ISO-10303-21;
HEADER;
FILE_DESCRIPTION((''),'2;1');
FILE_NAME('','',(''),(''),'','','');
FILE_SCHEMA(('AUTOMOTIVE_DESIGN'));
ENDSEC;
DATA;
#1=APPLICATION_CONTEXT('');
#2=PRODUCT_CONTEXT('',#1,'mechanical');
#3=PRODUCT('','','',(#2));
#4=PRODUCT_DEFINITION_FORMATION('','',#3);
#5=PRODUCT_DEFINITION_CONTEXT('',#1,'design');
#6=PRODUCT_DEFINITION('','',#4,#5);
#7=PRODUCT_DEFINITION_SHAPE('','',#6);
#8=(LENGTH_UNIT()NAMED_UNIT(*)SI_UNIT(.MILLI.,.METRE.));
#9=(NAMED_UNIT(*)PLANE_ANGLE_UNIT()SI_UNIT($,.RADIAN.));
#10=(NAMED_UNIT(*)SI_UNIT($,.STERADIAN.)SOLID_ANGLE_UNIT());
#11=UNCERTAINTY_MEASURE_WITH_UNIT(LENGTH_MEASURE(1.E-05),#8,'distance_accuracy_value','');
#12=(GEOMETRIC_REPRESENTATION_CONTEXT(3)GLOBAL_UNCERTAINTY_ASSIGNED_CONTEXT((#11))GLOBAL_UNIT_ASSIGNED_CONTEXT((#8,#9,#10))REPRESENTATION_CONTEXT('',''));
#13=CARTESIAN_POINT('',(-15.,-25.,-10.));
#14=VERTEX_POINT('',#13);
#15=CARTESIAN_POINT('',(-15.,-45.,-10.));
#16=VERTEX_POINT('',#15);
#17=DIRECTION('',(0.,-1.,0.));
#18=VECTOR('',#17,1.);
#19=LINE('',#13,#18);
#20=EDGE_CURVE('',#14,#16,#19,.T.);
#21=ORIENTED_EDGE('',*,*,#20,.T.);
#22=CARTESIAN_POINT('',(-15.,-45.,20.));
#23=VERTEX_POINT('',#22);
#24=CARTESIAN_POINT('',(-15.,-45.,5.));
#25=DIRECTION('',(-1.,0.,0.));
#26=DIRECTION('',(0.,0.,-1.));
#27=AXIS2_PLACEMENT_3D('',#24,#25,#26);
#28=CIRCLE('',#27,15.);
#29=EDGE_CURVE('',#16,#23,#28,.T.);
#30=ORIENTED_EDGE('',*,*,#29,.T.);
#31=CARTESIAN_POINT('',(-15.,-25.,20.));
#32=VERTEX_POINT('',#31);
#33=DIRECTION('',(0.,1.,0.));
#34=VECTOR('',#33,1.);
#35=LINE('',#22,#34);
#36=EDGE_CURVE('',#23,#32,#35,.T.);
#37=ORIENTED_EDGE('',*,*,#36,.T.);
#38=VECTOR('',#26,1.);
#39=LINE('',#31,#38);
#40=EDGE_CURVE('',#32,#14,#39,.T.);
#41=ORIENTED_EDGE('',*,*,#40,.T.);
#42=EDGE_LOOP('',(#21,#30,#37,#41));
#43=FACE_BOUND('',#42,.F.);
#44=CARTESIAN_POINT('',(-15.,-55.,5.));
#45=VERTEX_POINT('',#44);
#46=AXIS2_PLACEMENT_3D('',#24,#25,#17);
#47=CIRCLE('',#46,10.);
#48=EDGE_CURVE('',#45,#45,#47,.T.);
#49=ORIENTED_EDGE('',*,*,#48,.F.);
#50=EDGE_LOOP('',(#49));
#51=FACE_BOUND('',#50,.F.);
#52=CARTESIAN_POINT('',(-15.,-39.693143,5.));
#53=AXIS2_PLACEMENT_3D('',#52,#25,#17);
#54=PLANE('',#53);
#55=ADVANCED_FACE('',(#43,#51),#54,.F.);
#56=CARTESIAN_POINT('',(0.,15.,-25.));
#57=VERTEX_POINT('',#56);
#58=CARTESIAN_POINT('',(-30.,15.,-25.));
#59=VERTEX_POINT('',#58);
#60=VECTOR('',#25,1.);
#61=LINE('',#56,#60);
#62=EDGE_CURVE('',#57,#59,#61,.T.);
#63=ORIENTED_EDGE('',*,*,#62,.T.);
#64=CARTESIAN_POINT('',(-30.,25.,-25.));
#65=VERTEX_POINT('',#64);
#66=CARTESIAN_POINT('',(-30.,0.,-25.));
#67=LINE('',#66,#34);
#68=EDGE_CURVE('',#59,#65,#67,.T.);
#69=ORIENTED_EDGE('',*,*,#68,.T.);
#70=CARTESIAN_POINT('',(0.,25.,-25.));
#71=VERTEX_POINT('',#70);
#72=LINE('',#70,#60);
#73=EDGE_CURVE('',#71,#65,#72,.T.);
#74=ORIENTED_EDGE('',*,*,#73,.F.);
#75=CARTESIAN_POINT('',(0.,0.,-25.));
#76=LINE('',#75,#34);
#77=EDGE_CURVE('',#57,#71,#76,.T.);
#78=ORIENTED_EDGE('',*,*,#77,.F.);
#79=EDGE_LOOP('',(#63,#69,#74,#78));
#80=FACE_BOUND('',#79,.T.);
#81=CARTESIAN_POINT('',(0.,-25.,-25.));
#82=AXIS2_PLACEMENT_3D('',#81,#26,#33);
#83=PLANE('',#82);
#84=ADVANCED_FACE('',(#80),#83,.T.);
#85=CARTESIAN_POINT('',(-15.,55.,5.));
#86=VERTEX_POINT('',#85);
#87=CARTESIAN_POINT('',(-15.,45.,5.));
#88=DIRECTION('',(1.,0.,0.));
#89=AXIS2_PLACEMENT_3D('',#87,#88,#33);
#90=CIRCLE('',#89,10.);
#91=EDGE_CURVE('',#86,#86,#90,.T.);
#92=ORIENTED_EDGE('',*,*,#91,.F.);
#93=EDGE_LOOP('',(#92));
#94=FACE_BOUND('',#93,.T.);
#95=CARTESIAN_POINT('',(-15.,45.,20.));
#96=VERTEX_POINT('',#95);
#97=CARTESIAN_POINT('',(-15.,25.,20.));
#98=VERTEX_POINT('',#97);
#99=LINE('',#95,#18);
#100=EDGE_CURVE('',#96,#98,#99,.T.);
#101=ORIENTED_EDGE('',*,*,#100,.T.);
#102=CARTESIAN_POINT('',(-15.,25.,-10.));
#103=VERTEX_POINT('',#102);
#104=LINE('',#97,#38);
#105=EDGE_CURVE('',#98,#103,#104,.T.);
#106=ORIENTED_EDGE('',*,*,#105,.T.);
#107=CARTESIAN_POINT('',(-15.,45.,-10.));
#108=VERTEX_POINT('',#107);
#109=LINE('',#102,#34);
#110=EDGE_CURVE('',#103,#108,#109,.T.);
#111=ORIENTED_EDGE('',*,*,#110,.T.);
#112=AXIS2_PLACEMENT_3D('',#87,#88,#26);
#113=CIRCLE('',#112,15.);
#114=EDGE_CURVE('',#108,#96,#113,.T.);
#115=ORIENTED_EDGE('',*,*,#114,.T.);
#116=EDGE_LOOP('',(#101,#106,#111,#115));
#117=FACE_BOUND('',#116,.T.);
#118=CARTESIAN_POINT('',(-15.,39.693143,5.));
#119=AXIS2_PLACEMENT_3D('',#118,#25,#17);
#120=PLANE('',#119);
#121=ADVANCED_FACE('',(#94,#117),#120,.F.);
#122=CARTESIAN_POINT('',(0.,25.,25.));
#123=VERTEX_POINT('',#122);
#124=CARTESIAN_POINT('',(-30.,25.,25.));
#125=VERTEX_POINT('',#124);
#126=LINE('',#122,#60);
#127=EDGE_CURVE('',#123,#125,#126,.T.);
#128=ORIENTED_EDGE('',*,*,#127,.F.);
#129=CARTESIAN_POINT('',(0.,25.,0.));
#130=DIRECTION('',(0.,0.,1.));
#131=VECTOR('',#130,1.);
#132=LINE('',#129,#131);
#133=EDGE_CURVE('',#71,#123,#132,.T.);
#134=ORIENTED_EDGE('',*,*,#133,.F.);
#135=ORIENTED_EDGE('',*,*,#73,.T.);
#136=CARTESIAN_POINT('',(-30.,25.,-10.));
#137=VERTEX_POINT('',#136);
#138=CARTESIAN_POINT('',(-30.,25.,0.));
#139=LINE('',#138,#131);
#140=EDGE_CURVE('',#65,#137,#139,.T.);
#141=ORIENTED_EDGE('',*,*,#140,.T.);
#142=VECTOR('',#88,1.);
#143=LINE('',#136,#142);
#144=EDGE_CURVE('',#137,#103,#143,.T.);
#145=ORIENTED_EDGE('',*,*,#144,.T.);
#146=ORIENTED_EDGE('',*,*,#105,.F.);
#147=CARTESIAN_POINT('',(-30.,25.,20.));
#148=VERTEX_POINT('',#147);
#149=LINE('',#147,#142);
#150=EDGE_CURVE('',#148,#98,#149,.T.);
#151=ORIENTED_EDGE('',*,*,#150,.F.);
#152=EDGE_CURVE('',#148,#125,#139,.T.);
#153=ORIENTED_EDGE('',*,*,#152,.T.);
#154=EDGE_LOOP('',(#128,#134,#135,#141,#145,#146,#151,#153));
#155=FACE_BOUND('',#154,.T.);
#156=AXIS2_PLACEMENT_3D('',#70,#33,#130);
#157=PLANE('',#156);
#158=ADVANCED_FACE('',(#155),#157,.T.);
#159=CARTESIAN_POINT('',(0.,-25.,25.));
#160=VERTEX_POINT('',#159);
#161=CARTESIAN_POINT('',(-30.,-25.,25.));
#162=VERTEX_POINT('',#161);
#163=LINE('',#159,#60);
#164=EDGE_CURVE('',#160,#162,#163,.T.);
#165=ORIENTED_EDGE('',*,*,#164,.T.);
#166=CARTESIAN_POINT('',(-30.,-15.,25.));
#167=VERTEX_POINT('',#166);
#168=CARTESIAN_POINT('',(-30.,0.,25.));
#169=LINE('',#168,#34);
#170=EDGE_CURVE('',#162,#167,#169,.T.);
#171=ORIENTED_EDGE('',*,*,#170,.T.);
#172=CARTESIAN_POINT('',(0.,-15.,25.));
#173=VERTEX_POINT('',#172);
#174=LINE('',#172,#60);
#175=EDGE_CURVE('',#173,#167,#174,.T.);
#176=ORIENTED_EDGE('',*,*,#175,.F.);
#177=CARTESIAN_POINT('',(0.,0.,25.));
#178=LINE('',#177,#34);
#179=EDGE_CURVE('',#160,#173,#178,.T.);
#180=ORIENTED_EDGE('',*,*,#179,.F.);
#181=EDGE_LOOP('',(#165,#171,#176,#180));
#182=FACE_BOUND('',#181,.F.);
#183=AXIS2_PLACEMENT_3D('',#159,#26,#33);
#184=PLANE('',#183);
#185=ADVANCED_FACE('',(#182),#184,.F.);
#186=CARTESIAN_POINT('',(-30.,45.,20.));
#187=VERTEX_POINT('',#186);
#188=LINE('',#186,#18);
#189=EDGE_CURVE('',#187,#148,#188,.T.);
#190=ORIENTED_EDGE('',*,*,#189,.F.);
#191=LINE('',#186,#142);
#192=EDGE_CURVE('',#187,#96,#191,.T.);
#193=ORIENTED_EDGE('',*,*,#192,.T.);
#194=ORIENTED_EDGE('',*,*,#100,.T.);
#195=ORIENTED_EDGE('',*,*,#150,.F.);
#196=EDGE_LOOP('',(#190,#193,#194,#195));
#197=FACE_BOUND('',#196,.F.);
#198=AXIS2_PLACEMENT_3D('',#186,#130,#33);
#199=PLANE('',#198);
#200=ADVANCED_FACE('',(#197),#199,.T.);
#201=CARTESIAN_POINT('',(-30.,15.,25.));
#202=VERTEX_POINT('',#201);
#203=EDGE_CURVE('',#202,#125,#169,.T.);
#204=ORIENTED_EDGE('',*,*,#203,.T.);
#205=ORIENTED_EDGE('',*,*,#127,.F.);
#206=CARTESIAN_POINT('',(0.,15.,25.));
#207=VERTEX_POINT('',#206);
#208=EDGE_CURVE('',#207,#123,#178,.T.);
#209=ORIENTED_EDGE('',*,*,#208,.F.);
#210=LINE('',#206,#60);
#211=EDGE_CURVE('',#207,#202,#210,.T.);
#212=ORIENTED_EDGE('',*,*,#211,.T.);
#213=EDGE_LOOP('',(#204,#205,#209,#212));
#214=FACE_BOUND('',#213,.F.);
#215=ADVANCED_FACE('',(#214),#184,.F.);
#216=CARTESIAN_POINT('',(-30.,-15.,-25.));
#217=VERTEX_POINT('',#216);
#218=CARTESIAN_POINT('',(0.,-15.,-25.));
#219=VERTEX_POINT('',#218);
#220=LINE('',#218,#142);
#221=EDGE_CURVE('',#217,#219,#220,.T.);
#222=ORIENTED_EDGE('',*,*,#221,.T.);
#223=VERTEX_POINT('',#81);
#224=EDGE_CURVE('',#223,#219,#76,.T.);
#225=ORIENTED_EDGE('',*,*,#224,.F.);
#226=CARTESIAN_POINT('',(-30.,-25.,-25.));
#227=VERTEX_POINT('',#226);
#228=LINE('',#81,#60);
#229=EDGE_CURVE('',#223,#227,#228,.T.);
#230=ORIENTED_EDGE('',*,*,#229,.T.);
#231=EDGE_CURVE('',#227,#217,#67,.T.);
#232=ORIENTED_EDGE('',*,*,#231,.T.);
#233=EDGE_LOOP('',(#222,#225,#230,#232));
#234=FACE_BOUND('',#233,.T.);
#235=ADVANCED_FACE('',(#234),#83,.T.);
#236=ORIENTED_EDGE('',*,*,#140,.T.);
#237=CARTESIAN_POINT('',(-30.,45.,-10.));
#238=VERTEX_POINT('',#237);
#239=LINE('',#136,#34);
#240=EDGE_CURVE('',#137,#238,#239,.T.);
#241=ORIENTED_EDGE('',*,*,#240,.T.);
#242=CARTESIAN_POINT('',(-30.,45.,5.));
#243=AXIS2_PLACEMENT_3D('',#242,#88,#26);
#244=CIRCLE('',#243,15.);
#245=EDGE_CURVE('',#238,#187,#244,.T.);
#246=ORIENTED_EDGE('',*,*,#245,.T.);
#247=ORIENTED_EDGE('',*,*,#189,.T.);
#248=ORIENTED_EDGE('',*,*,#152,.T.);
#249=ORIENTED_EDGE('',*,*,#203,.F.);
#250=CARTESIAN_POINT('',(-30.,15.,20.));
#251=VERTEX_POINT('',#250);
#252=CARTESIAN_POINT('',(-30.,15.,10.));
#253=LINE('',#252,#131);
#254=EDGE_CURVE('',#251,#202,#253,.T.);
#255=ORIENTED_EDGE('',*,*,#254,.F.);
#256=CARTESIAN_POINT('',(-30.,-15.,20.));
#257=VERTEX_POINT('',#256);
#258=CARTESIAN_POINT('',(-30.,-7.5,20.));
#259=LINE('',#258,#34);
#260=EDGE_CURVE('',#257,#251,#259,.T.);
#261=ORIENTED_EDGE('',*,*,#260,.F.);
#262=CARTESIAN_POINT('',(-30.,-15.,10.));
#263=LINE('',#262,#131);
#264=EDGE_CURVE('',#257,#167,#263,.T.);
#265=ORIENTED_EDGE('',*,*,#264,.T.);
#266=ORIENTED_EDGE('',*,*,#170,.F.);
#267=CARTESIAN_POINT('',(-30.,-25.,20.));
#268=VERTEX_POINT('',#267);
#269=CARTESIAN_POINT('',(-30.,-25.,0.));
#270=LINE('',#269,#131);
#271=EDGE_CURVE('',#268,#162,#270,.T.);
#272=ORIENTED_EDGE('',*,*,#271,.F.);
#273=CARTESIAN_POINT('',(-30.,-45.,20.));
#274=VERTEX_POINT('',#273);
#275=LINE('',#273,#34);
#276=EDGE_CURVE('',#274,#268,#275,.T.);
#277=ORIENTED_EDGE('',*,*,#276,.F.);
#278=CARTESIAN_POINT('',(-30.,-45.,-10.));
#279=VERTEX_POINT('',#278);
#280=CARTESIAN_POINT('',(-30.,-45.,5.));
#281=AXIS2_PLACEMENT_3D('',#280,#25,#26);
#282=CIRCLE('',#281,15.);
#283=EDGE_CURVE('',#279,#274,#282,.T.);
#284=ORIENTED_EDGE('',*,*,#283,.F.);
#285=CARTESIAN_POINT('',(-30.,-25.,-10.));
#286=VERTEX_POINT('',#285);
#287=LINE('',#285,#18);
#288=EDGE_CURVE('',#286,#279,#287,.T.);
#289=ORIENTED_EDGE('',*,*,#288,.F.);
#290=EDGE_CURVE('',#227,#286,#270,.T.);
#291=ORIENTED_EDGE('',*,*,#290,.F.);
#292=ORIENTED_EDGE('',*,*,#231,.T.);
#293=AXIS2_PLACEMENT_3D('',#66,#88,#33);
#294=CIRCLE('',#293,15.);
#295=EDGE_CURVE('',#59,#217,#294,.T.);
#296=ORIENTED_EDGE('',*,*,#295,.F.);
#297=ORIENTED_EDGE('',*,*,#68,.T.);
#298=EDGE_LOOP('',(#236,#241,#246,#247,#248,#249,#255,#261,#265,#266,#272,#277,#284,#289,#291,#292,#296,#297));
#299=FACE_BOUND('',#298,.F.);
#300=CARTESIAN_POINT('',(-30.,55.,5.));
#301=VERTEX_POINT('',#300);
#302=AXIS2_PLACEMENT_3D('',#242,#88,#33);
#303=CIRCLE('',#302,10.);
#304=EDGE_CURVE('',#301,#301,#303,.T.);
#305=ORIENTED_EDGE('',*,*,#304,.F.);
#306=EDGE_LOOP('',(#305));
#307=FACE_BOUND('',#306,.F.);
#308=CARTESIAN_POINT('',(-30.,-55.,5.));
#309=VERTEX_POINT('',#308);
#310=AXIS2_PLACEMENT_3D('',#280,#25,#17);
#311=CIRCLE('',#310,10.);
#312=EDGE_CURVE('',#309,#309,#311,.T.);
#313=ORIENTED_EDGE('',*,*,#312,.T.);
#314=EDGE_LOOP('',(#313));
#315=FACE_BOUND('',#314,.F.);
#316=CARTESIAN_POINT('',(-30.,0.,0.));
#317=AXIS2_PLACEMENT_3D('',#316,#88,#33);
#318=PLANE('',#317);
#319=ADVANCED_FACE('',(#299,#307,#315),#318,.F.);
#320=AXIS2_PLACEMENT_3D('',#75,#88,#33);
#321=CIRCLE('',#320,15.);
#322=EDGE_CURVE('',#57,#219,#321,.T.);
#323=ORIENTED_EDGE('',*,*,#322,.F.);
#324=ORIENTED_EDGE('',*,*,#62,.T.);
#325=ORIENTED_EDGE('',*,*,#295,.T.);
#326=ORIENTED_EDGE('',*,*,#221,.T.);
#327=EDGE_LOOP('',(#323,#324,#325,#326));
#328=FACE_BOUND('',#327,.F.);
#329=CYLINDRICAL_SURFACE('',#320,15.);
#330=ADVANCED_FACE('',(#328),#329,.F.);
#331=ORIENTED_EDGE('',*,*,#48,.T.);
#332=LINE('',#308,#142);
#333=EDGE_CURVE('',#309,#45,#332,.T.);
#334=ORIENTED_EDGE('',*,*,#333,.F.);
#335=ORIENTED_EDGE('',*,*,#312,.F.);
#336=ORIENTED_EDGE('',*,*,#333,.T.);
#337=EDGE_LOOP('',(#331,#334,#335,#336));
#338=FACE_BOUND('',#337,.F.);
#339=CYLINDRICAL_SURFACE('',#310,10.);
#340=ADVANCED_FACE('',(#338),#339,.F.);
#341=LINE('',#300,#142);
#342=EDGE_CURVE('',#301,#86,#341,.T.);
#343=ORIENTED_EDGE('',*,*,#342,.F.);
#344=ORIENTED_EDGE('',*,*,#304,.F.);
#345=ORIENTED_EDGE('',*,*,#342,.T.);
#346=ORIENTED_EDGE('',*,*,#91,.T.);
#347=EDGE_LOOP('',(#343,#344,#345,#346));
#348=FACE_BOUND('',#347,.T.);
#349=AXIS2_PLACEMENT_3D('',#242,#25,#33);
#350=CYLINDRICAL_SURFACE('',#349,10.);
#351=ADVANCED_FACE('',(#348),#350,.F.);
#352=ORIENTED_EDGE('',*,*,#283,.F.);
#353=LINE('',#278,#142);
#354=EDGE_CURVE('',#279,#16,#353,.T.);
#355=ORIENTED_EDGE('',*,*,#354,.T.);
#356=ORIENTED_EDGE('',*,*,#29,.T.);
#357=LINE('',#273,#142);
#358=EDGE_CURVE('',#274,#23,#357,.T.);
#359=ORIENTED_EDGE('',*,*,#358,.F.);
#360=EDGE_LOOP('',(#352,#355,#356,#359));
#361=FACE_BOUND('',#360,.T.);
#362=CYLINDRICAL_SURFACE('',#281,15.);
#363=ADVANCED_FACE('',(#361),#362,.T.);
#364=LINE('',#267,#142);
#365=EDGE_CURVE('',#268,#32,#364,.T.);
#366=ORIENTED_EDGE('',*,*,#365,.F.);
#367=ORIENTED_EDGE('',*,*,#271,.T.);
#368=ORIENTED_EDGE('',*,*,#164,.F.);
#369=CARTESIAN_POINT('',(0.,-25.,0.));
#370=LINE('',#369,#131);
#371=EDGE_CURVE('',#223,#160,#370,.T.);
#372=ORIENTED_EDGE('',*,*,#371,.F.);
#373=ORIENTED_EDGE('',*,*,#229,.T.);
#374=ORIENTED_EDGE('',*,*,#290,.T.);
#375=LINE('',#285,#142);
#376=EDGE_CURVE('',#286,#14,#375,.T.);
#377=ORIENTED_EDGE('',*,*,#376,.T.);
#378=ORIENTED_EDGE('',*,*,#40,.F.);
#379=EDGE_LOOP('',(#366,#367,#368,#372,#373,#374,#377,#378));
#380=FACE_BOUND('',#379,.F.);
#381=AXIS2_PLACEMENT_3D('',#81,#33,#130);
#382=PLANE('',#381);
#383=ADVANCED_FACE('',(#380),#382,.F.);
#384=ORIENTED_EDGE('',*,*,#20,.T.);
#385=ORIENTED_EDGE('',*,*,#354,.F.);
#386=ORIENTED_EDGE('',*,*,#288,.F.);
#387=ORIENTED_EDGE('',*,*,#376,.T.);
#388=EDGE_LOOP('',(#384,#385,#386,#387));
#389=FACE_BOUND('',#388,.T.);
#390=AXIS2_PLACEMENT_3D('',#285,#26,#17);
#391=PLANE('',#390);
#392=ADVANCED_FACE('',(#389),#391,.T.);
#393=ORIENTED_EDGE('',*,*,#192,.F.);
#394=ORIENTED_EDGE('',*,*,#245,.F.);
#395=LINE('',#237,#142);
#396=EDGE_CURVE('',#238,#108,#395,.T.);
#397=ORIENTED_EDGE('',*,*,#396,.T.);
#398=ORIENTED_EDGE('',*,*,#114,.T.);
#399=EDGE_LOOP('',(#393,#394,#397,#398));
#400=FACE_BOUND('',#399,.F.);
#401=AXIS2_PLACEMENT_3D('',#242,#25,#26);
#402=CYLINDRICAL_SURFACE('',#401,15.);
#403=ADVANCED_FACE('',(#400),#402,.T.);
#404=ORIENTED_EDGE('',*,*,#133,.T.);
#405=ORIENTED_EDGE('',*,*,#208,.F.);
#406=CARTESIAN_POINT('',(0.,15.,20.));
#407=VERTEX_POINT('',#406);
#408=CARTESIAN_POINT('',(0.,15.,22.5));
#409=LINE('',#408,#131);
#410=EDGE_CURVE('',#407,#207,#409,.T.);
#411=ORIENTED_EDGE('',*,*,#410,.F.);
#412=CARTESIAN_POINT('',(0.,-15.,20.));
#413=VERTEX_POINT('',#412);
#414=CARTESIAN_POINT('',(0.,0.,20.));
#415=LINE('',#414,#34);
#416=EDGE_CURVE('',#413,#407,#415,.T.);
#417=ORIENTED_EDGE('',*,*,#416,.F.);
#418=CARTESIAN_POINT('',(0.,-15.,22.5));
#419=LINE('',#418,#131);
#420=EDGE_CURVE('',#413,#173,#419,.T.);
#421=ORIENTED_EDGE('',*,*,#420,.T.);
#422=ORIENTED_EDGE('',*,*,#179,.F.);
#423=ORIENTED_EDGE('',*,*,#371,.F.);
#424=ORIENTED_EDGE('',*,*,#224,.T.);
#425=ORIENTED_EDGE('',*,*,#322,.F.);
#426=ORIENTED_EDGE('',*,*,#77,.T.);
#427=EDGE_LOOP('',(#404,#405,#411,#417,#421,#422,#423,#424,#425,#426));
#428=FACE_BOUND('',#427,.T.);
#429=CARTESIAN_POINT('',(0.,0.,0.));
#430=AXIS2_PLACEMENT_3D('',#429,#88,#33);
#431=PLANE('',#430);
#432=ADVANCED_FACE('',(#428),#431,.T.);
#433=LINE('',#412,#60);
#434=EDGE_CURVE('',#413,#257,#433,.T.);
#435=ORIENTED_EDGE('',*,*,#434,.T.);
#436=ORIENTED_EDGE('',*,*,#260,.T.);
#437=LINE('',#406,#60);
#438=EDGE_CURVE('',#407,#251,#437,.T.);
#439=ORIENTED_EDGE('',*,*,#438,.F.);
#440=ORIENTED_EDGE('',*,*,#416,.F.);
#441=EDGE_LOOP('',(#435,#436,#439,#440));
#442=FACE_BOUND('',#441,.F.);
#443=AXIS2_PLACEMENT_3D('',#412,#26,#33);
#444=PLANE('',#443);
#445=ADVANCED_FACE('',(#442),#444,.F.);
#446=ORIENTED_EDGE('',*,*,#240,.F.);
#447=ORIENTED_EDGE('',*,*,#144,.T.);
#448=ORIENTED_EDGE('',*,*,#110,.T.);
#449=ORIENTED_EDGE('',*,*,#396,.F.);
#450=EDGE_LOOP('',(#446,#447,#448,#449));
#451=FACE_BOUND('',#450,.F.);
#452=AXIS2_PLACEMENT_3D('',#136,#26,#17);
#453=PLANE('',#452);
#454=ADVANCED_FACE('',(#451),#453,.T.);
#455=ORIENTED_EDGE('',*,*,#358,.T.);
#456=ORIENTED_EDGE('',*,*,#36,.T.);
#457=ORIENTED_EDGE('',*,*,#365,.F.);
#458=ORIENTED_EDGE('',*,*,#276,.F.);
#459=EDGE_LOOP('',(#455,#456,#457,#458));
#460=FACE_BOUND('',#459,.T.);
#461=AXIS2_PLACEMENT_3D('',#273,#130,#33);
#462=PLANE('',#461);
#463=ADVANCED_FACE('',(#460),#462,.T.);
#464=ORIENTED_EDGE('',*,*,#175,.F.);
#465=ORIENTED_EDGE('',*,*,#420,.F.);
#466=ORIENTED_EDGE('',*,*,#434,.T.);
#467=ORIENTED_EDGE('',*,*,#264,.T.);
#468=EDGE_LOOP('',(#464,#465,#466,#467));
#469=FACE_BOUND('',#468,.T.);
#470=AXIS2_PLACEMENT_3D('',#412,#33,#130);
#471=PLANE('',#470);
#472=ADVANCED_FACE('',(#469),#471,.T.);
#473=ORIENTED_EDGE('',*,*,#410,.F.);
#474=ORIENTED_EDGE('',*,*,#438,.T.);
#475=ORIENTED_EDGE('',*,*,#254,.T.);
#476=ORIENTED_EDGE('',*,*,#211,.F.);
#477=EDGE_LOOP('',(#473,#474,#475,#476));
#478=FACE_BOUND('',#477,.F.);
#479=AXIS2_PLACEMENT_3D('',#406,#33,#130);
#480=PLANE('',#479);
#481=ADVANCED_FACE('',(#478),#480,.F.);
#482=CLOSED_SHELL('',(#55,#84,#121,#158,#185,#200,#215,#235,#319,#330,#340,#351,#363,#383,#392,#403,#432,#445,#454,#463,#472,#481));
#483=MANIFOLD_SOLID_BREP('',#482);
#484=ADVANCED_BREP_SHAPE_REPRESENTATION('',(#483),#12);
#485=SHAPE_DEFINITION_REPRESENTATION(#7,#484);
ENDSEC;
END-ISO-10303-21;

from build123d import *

# Parameters (mm, degrees)
F0_W     = 50
F0_H     = 50
F1_DEPTH = 30
F2_W     = 30
F2_H     = 5
F2_R     = 15
F3_DEPTH = 30.001
F4_R     = 10
F5_DEPTH = 15


# Not quite as in the source:
# - a pattern or mirror of a feature is missing from the dataset's text; its kind, count and spacing are read off the source's solid


with BuildPart() as f1:
    # F0 (on Right) → F1 (new body)
    with BuildSketch(Plane.YZ):
        Rectangle(F0_W, F0_H)
    extrude(amount=-F1_DEPTH)

    # F2 (on face) → F3 (cut, through all)
    with BuildSketch(Plane.YZ):
        with Locations((0, 22.5)):
            Rectangle(F2_W, F2_H)
        with Locations((0, -25)):
            Circle(F2_R)
    extrude(amount=-F3_DEPTH, mode=Mode.SUBTRACT)

    # F4 (on face) → F5 (join)
    with BuildSketch(Plane(origin=(-30, 0, 0), x_dir=(0, -1, 0), z_dir=(-1, 0, 0))):
        with BuildLine():
            Line((45, 20), (25, 20))
            Line((25, 20), (25, -10))
            Line((25, -10), (45, -10))
            ThreePointArc((45, -10), (55.6066017178, -5.6066017178), (60, 5))
            ThreePointArc((60, 5), (55.6066017178, 15.6066017178), (45, 20))
        make_face()
        with Locations((45, 5)):
            Circle(F4_R, mode=Mode.SUBTRACT)
    f5 = extrude(amount=-F5_DEPTH)

    # F5_copies: F5 across plane
    add(f5.mirror(Plane.ZX))


solid = f1.part
